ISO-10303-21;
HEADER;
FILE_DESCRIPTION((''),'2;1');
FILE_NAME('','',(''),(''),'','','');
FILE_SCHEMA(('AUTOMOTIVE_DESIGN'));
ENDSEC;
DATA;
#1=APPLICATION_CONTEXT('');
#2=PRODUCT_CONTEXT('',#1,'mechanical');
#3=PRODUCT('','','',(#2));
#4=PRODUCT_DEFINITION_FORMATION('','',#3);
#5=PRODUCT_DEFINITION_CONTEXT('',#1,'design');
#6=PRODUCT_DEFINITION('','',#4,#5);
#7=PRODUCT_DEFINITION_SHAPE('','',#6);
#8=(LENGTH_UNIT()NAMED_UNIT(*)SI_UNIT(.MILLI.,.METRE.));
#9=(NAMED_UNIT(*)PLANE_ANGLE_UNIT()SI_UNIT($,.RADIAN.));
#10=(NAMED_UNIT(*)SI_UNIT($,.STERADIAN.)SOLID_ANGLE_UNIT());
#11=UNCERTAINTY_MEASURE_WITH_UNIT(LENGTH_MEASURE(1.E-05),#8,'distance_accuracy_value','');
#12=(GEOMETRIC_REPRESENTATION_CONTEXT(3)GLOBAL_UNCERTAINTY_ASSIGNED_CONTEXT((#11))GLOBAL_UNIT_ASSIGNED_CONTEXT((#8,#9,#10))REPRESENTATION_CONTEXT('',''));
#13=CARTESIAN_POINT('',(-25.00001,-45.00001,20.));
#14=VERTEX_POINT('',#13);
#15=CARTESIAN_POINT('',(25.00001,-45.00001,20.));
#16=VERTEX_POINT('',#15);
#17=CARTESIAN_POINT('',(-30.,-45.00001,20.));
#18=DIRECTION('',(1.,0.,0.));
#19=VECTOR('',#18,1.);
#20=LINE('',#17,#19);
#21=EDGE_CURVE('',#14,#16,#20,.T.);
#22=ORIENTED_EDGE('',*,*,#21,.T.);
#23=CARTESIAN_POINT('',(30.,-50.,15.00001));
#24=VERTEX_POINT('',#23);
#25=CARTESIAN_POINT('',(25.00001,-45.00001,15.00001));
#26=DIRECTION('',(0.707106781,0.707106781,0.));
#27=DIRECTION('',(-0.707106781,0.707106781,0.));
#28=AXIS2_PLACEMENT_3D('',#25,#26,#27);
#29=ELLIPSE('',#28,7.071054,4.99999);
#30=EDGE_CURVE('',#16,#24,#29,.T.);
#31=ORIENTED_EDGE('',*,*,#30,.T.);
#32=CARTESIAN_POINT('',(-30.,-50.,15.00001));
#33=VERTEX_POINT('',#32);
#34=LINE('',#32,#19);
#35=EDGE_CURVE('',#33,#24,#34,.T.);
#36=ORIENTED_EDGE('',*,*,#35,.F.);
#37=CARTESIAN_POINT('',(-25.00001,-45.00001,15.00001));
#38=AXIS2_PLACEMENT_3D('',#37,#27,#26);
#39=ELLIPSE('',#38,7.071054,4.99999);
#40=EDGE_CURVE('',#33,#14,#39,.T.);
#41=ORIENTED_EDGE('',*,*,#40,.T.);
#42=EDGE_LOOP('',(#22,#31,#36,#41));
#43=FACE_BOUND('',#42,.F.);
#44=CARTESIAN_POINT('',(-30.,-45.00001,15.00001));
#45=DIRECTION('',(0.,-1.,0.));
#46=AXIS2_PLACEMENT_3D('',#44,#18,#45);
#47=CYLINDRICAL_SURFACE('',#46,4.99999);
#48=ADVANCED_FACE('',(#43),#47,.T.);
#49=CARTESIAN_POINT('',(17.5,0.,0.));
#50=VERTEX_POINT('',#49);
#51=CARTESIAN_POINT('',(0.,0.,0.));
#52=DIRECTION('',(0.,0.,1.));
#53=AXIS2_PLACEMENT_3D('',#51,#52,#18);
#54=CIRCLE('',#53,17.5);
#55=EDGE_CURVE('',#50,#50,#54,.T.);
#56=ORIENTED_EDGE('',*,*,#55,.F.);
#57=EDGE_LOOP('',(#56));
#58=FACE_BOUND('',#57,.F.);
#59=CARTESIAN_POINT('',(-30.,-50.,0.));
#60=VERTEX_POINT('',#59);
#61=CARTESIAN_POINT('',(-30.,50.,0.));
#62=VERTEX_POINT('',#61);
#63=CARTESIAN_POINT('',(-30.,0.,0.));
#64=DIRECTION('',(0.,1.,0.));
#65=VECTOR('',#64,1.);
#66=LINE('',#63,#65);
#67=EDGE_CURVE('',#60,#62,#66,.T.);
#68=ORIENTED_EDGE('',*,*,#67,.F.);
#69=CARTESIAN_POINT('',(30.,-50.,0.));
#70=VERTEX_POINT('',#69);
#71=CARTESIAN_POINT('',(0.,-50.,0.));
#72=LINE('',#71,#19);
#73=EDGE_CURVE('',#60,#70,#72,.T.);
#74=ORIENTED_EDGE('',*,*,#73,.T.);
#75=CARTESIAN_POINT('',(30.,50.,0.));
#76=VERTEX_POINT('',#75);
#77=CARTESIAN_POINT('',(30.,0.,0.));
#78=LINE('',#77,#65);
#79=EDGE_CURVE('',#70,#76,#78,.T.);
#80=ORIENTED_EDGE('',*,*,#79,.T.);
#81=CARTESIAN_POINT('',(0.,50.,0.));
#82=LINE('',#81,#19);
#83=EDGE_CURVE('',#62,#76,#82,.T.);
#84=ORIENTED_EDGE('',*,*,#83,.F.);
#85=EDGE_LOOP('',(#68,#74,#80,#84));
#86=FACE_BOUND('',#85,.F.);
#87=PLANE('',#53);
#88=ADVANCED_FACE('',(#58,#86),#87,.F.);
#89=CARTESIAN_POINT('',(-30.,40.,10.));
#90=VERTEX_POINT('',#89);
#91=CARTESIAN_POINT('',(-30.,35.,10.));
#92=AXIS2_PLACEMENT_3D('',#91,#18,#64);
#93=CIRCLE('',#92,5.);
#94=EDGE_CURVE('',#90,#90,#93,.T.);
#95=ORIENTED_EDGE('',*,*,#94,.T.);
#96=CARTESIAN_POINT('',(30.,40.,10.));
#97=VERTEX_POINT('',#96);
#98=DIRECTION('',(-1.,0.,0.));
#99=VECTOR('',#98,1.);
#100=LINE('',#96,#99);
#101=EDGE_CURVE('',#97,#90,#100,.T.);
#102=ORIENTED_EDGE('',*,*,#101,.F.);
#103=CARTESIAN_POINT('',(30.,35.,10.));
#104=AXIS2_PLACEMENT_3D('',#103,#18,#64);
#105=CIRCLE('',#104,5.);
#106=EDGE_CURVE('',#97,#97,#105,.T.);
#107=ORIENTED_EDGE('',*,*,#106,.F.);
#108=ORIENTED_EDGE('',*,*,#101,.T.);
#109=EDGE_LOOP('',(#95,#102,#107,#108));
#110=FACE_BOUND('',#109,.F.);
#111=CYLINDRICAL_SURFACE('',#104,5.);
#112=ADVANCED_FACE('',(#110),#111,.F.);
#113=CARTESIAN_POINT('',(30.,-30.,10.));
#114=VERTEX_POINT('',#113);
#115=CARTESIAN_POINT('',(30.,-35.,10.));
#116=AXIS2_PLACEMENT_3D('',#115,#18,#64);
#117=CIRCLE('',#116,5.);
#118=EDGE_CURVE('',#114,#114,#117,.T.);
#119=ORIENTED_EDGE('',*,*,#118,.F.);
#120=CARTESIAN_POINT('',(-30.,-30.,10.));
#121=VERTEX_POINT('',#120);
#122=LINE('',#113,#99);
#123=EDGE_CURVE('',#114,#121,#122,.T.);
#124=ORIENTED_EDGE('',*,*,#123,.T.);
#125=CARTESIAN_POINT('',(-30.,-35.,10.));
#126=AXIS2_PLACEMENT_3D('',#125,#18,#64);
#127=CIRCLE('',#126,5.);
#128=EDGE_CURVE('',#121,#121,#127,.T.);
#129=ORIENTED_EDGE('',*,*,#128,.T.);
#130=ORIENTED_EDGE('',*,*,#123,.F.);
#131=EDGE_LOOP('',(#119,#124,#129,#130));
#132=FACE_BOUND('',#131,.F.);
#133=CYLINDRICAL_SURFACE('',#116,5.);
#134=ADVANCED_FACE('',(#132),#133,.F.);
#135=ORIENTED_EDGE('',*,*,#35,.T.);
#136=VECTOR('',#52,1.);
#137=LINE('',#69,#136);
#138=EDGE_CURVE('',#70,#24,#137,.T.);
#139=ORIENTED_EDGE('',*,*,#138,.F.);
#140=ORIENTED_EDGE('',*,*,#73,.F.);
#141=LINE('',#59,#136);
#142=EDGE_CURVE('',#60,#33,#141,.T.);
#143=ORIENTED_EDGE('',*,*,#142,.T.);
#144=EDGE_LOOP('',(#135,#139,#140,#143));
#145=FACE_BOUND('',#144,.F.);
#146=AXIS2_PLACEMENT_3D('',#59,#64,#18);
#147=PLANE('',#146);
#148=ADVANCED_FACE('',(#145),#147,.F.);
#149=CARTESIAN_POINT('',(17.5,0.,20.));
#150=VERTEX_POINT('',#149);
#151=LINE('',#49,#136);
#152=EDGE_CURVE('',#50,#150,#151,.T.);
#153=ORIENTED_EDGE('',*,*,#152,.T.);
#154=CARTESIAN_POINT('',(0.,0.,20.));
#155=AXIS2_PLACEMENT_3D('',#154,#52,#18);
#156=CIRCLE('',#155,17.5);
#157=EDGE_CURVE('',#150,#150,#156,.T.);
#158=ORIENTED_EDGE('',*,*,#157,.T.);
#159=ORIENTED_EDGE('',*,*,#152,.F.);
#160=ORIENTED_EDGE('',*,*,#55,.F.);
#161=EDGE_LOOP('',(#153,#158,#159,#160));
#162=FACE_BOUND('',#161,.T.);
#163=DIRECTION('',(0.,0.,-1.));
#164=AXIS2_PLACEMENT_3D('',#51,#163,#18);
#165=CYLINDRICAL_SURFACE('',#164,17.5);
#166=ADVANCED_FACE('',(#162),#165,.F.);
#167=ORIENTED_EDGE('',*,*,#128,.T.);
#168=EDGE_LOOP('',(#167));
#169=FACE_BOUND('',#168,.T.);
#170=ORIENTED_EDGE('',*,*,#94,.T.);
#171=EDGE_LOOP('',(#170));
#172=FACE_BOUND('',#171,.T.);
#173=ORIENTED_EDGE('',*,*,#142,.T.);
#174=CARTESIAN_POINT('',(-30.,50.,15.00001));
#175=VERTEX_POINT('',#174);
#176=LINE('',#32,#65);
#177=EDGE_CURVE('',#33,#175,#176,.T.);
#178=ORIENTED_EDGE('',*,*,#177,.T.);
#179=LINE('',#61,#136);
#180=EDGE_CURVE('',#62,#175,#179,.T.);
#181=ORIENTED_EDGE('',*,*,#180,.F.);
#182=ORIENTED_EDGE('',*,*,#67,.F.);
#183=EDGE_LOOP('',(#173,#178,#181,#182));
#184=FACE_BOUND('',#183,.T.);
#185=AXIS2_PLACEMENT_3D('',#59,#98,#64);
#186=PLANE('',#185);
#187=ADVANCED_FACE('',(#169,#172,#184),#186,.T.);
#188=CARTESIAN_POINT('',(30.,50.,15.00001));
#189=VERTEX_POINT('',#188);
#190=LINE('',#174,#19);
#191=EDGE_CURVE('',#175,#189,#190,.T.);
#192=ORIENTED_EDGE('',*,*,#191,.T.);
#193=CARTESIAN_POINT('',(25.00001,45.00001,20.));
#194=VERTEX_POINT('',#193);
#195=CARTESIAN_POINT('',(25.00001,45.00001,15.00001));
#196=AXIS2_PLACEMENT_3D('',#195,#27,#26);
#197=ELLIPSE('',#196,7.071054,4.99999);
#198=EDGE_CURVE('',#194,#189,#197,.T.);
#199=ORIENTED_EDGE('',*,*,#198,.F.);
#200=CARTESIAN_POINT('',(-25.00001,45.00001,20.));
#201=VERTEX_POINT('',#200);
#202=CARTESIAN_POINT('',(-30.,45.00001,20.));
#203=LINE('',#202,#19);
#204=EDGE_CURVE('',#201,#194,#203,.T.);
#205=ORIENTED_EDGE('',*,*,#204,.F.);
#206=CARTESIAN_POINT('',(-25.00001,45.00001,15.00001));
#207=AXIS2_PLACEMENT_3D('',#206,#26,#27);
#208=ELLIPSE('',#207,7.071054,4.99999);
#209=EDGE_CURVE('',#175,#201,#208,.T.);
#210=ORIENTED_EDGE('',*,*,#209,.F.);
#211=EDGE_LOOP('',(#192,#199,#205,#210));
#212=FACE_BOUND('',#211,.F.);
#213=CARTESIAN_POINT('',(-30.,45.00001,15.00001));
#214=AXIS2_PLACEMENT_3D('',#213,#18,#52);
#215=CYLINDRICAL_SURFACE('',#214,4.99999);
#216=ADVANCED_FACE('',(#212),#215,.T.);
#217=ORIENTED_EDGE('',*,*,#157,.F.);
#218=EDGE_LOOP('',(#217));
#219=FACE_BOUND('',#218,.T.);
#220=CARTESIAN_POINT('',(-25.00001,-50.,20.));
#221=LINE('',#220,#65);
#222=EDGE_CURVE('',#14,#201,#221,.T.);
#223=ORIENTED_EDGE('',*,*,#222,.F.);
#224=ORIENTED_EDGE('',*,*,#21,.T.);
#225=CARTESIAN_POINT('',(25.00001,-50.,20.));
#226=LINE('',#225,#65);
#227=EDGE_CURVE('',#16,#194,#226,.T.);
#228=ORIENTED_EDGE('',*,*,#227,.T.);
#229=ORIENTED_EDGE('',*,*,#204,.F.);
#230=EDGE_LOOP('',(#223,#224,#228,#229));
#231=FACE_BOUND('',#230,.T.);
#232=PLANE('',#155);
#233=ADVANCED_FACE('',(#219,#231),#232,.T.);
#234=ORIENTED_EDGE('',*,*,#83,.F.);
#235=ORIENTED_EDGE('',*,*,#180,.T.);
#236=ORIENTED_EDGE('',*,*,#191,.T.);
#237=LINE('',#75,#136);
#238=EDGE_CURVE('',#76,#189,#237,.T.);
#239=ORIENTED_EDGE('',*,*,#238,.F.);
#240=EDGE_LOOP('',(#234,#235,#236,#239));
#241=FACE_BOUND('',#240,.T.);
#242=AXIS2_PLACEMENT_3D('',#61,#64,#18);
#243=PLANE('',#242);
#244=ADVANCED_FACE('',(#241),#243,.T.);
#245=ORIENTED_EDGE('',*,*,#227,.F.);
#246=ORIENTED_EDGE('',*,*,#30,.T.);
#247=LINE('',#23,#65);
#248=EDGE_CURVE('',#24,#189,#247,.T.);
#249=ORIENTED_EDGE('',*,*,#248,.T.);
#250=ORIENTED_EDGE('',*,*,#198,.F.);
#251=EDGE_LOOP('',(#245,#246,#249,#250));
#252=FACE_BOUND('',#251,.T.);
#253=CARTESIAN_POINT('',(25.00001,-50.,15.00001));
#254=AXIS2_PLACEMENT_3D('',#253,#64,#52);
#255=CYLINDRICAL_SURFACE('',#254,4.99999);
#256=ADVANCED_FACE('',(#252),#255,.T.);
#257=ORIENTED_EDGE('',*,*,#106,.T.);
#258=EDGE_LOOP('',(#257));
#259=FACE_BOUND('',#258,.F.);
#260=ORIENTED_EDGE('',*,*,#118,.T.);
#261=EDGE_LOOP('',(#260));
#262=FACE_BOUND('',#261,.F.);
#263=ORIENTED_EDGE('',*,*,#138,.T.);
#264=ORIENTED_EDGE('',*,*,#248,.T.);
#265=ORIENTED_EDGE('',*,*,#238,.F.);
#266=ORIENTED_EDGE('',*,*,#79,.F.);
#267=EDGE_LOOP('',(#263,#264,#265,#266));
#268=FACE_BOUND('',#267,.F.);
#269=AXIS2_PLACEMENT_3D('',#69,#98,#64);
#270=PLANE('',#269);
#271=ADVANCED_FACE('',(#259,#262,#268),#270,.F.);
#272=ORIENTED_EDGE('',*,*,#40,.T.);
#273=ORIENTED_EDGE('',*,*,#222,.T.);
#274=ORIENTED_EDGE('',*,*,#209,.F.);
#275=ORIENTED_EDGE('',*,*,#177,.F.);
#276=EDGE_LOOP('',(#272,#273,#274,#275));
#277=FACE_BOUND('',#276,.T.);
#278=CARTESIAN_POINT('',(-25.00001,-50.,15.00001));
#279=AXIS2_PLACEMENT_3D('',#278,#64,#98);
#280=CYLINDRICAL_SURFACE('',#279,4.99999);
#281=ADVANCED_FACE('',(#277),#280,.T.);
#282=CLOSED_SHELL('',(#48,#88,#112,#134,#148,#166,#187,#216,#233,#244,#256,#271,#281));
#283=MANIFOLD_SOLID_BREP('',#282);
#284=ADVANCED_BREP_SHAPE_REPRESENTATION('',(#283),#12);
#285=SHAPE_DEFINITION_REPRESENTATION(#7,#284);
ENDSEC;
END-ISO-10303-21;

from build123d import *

# Parameters (mm, degrees)
F0_W     = 60
F0_H     = 100
F0_R     = 17.5
F1_DEPTH = 20
F2_W     = 100
F2_H     = 20
F2_R     = 5
F3_DEPTH = 100
F4_R     = 4.99999


# Not quite as in the source:
# - a fillet or chamfer is up to 0.001 mm smaller than in the source, because OpenCascade refuses the exact size


with BuildPart() as f1:
    # F0 (on Top) → F1 (new body)
    with BuildSketch(Plane.XY):
        Rectangle(F0_W, F0_H)
        Circle(F0_R, mode=Mode.SUBTRACT)
    extrude(amount=F1_DEPTH)

    # F2 (on face) → F3 (intersect)
    with BuildSketch(Plane.YZ.offset(30)):
        with Locations((0, 10)):
            Rectangle(F2_W, F2_H)
        with Locations((-35, 10)):
            Circle(F2_R, mode=Mode.SUBTRACT)
        with Locations((35, 10)):
            Circle(F2_R, mode=Mode.SUBTRACT)
    extrude(amount=-F3_DEPTH, mode=Mode.INTERSECT)

    # F4 (radius 5 in the source; OpenCascade refuses exactly that, so slightly less here)
    f4_edges = [f1.edges().sort_by_distance(p)[0] for p in [
        (30, 0, 20),
        (0, -50, 20),
        (-30, 0, 20),
        (0, 50, 20),
    ]]
    fillet(f4_edges, radius=F4_R)


solid = f1.part
